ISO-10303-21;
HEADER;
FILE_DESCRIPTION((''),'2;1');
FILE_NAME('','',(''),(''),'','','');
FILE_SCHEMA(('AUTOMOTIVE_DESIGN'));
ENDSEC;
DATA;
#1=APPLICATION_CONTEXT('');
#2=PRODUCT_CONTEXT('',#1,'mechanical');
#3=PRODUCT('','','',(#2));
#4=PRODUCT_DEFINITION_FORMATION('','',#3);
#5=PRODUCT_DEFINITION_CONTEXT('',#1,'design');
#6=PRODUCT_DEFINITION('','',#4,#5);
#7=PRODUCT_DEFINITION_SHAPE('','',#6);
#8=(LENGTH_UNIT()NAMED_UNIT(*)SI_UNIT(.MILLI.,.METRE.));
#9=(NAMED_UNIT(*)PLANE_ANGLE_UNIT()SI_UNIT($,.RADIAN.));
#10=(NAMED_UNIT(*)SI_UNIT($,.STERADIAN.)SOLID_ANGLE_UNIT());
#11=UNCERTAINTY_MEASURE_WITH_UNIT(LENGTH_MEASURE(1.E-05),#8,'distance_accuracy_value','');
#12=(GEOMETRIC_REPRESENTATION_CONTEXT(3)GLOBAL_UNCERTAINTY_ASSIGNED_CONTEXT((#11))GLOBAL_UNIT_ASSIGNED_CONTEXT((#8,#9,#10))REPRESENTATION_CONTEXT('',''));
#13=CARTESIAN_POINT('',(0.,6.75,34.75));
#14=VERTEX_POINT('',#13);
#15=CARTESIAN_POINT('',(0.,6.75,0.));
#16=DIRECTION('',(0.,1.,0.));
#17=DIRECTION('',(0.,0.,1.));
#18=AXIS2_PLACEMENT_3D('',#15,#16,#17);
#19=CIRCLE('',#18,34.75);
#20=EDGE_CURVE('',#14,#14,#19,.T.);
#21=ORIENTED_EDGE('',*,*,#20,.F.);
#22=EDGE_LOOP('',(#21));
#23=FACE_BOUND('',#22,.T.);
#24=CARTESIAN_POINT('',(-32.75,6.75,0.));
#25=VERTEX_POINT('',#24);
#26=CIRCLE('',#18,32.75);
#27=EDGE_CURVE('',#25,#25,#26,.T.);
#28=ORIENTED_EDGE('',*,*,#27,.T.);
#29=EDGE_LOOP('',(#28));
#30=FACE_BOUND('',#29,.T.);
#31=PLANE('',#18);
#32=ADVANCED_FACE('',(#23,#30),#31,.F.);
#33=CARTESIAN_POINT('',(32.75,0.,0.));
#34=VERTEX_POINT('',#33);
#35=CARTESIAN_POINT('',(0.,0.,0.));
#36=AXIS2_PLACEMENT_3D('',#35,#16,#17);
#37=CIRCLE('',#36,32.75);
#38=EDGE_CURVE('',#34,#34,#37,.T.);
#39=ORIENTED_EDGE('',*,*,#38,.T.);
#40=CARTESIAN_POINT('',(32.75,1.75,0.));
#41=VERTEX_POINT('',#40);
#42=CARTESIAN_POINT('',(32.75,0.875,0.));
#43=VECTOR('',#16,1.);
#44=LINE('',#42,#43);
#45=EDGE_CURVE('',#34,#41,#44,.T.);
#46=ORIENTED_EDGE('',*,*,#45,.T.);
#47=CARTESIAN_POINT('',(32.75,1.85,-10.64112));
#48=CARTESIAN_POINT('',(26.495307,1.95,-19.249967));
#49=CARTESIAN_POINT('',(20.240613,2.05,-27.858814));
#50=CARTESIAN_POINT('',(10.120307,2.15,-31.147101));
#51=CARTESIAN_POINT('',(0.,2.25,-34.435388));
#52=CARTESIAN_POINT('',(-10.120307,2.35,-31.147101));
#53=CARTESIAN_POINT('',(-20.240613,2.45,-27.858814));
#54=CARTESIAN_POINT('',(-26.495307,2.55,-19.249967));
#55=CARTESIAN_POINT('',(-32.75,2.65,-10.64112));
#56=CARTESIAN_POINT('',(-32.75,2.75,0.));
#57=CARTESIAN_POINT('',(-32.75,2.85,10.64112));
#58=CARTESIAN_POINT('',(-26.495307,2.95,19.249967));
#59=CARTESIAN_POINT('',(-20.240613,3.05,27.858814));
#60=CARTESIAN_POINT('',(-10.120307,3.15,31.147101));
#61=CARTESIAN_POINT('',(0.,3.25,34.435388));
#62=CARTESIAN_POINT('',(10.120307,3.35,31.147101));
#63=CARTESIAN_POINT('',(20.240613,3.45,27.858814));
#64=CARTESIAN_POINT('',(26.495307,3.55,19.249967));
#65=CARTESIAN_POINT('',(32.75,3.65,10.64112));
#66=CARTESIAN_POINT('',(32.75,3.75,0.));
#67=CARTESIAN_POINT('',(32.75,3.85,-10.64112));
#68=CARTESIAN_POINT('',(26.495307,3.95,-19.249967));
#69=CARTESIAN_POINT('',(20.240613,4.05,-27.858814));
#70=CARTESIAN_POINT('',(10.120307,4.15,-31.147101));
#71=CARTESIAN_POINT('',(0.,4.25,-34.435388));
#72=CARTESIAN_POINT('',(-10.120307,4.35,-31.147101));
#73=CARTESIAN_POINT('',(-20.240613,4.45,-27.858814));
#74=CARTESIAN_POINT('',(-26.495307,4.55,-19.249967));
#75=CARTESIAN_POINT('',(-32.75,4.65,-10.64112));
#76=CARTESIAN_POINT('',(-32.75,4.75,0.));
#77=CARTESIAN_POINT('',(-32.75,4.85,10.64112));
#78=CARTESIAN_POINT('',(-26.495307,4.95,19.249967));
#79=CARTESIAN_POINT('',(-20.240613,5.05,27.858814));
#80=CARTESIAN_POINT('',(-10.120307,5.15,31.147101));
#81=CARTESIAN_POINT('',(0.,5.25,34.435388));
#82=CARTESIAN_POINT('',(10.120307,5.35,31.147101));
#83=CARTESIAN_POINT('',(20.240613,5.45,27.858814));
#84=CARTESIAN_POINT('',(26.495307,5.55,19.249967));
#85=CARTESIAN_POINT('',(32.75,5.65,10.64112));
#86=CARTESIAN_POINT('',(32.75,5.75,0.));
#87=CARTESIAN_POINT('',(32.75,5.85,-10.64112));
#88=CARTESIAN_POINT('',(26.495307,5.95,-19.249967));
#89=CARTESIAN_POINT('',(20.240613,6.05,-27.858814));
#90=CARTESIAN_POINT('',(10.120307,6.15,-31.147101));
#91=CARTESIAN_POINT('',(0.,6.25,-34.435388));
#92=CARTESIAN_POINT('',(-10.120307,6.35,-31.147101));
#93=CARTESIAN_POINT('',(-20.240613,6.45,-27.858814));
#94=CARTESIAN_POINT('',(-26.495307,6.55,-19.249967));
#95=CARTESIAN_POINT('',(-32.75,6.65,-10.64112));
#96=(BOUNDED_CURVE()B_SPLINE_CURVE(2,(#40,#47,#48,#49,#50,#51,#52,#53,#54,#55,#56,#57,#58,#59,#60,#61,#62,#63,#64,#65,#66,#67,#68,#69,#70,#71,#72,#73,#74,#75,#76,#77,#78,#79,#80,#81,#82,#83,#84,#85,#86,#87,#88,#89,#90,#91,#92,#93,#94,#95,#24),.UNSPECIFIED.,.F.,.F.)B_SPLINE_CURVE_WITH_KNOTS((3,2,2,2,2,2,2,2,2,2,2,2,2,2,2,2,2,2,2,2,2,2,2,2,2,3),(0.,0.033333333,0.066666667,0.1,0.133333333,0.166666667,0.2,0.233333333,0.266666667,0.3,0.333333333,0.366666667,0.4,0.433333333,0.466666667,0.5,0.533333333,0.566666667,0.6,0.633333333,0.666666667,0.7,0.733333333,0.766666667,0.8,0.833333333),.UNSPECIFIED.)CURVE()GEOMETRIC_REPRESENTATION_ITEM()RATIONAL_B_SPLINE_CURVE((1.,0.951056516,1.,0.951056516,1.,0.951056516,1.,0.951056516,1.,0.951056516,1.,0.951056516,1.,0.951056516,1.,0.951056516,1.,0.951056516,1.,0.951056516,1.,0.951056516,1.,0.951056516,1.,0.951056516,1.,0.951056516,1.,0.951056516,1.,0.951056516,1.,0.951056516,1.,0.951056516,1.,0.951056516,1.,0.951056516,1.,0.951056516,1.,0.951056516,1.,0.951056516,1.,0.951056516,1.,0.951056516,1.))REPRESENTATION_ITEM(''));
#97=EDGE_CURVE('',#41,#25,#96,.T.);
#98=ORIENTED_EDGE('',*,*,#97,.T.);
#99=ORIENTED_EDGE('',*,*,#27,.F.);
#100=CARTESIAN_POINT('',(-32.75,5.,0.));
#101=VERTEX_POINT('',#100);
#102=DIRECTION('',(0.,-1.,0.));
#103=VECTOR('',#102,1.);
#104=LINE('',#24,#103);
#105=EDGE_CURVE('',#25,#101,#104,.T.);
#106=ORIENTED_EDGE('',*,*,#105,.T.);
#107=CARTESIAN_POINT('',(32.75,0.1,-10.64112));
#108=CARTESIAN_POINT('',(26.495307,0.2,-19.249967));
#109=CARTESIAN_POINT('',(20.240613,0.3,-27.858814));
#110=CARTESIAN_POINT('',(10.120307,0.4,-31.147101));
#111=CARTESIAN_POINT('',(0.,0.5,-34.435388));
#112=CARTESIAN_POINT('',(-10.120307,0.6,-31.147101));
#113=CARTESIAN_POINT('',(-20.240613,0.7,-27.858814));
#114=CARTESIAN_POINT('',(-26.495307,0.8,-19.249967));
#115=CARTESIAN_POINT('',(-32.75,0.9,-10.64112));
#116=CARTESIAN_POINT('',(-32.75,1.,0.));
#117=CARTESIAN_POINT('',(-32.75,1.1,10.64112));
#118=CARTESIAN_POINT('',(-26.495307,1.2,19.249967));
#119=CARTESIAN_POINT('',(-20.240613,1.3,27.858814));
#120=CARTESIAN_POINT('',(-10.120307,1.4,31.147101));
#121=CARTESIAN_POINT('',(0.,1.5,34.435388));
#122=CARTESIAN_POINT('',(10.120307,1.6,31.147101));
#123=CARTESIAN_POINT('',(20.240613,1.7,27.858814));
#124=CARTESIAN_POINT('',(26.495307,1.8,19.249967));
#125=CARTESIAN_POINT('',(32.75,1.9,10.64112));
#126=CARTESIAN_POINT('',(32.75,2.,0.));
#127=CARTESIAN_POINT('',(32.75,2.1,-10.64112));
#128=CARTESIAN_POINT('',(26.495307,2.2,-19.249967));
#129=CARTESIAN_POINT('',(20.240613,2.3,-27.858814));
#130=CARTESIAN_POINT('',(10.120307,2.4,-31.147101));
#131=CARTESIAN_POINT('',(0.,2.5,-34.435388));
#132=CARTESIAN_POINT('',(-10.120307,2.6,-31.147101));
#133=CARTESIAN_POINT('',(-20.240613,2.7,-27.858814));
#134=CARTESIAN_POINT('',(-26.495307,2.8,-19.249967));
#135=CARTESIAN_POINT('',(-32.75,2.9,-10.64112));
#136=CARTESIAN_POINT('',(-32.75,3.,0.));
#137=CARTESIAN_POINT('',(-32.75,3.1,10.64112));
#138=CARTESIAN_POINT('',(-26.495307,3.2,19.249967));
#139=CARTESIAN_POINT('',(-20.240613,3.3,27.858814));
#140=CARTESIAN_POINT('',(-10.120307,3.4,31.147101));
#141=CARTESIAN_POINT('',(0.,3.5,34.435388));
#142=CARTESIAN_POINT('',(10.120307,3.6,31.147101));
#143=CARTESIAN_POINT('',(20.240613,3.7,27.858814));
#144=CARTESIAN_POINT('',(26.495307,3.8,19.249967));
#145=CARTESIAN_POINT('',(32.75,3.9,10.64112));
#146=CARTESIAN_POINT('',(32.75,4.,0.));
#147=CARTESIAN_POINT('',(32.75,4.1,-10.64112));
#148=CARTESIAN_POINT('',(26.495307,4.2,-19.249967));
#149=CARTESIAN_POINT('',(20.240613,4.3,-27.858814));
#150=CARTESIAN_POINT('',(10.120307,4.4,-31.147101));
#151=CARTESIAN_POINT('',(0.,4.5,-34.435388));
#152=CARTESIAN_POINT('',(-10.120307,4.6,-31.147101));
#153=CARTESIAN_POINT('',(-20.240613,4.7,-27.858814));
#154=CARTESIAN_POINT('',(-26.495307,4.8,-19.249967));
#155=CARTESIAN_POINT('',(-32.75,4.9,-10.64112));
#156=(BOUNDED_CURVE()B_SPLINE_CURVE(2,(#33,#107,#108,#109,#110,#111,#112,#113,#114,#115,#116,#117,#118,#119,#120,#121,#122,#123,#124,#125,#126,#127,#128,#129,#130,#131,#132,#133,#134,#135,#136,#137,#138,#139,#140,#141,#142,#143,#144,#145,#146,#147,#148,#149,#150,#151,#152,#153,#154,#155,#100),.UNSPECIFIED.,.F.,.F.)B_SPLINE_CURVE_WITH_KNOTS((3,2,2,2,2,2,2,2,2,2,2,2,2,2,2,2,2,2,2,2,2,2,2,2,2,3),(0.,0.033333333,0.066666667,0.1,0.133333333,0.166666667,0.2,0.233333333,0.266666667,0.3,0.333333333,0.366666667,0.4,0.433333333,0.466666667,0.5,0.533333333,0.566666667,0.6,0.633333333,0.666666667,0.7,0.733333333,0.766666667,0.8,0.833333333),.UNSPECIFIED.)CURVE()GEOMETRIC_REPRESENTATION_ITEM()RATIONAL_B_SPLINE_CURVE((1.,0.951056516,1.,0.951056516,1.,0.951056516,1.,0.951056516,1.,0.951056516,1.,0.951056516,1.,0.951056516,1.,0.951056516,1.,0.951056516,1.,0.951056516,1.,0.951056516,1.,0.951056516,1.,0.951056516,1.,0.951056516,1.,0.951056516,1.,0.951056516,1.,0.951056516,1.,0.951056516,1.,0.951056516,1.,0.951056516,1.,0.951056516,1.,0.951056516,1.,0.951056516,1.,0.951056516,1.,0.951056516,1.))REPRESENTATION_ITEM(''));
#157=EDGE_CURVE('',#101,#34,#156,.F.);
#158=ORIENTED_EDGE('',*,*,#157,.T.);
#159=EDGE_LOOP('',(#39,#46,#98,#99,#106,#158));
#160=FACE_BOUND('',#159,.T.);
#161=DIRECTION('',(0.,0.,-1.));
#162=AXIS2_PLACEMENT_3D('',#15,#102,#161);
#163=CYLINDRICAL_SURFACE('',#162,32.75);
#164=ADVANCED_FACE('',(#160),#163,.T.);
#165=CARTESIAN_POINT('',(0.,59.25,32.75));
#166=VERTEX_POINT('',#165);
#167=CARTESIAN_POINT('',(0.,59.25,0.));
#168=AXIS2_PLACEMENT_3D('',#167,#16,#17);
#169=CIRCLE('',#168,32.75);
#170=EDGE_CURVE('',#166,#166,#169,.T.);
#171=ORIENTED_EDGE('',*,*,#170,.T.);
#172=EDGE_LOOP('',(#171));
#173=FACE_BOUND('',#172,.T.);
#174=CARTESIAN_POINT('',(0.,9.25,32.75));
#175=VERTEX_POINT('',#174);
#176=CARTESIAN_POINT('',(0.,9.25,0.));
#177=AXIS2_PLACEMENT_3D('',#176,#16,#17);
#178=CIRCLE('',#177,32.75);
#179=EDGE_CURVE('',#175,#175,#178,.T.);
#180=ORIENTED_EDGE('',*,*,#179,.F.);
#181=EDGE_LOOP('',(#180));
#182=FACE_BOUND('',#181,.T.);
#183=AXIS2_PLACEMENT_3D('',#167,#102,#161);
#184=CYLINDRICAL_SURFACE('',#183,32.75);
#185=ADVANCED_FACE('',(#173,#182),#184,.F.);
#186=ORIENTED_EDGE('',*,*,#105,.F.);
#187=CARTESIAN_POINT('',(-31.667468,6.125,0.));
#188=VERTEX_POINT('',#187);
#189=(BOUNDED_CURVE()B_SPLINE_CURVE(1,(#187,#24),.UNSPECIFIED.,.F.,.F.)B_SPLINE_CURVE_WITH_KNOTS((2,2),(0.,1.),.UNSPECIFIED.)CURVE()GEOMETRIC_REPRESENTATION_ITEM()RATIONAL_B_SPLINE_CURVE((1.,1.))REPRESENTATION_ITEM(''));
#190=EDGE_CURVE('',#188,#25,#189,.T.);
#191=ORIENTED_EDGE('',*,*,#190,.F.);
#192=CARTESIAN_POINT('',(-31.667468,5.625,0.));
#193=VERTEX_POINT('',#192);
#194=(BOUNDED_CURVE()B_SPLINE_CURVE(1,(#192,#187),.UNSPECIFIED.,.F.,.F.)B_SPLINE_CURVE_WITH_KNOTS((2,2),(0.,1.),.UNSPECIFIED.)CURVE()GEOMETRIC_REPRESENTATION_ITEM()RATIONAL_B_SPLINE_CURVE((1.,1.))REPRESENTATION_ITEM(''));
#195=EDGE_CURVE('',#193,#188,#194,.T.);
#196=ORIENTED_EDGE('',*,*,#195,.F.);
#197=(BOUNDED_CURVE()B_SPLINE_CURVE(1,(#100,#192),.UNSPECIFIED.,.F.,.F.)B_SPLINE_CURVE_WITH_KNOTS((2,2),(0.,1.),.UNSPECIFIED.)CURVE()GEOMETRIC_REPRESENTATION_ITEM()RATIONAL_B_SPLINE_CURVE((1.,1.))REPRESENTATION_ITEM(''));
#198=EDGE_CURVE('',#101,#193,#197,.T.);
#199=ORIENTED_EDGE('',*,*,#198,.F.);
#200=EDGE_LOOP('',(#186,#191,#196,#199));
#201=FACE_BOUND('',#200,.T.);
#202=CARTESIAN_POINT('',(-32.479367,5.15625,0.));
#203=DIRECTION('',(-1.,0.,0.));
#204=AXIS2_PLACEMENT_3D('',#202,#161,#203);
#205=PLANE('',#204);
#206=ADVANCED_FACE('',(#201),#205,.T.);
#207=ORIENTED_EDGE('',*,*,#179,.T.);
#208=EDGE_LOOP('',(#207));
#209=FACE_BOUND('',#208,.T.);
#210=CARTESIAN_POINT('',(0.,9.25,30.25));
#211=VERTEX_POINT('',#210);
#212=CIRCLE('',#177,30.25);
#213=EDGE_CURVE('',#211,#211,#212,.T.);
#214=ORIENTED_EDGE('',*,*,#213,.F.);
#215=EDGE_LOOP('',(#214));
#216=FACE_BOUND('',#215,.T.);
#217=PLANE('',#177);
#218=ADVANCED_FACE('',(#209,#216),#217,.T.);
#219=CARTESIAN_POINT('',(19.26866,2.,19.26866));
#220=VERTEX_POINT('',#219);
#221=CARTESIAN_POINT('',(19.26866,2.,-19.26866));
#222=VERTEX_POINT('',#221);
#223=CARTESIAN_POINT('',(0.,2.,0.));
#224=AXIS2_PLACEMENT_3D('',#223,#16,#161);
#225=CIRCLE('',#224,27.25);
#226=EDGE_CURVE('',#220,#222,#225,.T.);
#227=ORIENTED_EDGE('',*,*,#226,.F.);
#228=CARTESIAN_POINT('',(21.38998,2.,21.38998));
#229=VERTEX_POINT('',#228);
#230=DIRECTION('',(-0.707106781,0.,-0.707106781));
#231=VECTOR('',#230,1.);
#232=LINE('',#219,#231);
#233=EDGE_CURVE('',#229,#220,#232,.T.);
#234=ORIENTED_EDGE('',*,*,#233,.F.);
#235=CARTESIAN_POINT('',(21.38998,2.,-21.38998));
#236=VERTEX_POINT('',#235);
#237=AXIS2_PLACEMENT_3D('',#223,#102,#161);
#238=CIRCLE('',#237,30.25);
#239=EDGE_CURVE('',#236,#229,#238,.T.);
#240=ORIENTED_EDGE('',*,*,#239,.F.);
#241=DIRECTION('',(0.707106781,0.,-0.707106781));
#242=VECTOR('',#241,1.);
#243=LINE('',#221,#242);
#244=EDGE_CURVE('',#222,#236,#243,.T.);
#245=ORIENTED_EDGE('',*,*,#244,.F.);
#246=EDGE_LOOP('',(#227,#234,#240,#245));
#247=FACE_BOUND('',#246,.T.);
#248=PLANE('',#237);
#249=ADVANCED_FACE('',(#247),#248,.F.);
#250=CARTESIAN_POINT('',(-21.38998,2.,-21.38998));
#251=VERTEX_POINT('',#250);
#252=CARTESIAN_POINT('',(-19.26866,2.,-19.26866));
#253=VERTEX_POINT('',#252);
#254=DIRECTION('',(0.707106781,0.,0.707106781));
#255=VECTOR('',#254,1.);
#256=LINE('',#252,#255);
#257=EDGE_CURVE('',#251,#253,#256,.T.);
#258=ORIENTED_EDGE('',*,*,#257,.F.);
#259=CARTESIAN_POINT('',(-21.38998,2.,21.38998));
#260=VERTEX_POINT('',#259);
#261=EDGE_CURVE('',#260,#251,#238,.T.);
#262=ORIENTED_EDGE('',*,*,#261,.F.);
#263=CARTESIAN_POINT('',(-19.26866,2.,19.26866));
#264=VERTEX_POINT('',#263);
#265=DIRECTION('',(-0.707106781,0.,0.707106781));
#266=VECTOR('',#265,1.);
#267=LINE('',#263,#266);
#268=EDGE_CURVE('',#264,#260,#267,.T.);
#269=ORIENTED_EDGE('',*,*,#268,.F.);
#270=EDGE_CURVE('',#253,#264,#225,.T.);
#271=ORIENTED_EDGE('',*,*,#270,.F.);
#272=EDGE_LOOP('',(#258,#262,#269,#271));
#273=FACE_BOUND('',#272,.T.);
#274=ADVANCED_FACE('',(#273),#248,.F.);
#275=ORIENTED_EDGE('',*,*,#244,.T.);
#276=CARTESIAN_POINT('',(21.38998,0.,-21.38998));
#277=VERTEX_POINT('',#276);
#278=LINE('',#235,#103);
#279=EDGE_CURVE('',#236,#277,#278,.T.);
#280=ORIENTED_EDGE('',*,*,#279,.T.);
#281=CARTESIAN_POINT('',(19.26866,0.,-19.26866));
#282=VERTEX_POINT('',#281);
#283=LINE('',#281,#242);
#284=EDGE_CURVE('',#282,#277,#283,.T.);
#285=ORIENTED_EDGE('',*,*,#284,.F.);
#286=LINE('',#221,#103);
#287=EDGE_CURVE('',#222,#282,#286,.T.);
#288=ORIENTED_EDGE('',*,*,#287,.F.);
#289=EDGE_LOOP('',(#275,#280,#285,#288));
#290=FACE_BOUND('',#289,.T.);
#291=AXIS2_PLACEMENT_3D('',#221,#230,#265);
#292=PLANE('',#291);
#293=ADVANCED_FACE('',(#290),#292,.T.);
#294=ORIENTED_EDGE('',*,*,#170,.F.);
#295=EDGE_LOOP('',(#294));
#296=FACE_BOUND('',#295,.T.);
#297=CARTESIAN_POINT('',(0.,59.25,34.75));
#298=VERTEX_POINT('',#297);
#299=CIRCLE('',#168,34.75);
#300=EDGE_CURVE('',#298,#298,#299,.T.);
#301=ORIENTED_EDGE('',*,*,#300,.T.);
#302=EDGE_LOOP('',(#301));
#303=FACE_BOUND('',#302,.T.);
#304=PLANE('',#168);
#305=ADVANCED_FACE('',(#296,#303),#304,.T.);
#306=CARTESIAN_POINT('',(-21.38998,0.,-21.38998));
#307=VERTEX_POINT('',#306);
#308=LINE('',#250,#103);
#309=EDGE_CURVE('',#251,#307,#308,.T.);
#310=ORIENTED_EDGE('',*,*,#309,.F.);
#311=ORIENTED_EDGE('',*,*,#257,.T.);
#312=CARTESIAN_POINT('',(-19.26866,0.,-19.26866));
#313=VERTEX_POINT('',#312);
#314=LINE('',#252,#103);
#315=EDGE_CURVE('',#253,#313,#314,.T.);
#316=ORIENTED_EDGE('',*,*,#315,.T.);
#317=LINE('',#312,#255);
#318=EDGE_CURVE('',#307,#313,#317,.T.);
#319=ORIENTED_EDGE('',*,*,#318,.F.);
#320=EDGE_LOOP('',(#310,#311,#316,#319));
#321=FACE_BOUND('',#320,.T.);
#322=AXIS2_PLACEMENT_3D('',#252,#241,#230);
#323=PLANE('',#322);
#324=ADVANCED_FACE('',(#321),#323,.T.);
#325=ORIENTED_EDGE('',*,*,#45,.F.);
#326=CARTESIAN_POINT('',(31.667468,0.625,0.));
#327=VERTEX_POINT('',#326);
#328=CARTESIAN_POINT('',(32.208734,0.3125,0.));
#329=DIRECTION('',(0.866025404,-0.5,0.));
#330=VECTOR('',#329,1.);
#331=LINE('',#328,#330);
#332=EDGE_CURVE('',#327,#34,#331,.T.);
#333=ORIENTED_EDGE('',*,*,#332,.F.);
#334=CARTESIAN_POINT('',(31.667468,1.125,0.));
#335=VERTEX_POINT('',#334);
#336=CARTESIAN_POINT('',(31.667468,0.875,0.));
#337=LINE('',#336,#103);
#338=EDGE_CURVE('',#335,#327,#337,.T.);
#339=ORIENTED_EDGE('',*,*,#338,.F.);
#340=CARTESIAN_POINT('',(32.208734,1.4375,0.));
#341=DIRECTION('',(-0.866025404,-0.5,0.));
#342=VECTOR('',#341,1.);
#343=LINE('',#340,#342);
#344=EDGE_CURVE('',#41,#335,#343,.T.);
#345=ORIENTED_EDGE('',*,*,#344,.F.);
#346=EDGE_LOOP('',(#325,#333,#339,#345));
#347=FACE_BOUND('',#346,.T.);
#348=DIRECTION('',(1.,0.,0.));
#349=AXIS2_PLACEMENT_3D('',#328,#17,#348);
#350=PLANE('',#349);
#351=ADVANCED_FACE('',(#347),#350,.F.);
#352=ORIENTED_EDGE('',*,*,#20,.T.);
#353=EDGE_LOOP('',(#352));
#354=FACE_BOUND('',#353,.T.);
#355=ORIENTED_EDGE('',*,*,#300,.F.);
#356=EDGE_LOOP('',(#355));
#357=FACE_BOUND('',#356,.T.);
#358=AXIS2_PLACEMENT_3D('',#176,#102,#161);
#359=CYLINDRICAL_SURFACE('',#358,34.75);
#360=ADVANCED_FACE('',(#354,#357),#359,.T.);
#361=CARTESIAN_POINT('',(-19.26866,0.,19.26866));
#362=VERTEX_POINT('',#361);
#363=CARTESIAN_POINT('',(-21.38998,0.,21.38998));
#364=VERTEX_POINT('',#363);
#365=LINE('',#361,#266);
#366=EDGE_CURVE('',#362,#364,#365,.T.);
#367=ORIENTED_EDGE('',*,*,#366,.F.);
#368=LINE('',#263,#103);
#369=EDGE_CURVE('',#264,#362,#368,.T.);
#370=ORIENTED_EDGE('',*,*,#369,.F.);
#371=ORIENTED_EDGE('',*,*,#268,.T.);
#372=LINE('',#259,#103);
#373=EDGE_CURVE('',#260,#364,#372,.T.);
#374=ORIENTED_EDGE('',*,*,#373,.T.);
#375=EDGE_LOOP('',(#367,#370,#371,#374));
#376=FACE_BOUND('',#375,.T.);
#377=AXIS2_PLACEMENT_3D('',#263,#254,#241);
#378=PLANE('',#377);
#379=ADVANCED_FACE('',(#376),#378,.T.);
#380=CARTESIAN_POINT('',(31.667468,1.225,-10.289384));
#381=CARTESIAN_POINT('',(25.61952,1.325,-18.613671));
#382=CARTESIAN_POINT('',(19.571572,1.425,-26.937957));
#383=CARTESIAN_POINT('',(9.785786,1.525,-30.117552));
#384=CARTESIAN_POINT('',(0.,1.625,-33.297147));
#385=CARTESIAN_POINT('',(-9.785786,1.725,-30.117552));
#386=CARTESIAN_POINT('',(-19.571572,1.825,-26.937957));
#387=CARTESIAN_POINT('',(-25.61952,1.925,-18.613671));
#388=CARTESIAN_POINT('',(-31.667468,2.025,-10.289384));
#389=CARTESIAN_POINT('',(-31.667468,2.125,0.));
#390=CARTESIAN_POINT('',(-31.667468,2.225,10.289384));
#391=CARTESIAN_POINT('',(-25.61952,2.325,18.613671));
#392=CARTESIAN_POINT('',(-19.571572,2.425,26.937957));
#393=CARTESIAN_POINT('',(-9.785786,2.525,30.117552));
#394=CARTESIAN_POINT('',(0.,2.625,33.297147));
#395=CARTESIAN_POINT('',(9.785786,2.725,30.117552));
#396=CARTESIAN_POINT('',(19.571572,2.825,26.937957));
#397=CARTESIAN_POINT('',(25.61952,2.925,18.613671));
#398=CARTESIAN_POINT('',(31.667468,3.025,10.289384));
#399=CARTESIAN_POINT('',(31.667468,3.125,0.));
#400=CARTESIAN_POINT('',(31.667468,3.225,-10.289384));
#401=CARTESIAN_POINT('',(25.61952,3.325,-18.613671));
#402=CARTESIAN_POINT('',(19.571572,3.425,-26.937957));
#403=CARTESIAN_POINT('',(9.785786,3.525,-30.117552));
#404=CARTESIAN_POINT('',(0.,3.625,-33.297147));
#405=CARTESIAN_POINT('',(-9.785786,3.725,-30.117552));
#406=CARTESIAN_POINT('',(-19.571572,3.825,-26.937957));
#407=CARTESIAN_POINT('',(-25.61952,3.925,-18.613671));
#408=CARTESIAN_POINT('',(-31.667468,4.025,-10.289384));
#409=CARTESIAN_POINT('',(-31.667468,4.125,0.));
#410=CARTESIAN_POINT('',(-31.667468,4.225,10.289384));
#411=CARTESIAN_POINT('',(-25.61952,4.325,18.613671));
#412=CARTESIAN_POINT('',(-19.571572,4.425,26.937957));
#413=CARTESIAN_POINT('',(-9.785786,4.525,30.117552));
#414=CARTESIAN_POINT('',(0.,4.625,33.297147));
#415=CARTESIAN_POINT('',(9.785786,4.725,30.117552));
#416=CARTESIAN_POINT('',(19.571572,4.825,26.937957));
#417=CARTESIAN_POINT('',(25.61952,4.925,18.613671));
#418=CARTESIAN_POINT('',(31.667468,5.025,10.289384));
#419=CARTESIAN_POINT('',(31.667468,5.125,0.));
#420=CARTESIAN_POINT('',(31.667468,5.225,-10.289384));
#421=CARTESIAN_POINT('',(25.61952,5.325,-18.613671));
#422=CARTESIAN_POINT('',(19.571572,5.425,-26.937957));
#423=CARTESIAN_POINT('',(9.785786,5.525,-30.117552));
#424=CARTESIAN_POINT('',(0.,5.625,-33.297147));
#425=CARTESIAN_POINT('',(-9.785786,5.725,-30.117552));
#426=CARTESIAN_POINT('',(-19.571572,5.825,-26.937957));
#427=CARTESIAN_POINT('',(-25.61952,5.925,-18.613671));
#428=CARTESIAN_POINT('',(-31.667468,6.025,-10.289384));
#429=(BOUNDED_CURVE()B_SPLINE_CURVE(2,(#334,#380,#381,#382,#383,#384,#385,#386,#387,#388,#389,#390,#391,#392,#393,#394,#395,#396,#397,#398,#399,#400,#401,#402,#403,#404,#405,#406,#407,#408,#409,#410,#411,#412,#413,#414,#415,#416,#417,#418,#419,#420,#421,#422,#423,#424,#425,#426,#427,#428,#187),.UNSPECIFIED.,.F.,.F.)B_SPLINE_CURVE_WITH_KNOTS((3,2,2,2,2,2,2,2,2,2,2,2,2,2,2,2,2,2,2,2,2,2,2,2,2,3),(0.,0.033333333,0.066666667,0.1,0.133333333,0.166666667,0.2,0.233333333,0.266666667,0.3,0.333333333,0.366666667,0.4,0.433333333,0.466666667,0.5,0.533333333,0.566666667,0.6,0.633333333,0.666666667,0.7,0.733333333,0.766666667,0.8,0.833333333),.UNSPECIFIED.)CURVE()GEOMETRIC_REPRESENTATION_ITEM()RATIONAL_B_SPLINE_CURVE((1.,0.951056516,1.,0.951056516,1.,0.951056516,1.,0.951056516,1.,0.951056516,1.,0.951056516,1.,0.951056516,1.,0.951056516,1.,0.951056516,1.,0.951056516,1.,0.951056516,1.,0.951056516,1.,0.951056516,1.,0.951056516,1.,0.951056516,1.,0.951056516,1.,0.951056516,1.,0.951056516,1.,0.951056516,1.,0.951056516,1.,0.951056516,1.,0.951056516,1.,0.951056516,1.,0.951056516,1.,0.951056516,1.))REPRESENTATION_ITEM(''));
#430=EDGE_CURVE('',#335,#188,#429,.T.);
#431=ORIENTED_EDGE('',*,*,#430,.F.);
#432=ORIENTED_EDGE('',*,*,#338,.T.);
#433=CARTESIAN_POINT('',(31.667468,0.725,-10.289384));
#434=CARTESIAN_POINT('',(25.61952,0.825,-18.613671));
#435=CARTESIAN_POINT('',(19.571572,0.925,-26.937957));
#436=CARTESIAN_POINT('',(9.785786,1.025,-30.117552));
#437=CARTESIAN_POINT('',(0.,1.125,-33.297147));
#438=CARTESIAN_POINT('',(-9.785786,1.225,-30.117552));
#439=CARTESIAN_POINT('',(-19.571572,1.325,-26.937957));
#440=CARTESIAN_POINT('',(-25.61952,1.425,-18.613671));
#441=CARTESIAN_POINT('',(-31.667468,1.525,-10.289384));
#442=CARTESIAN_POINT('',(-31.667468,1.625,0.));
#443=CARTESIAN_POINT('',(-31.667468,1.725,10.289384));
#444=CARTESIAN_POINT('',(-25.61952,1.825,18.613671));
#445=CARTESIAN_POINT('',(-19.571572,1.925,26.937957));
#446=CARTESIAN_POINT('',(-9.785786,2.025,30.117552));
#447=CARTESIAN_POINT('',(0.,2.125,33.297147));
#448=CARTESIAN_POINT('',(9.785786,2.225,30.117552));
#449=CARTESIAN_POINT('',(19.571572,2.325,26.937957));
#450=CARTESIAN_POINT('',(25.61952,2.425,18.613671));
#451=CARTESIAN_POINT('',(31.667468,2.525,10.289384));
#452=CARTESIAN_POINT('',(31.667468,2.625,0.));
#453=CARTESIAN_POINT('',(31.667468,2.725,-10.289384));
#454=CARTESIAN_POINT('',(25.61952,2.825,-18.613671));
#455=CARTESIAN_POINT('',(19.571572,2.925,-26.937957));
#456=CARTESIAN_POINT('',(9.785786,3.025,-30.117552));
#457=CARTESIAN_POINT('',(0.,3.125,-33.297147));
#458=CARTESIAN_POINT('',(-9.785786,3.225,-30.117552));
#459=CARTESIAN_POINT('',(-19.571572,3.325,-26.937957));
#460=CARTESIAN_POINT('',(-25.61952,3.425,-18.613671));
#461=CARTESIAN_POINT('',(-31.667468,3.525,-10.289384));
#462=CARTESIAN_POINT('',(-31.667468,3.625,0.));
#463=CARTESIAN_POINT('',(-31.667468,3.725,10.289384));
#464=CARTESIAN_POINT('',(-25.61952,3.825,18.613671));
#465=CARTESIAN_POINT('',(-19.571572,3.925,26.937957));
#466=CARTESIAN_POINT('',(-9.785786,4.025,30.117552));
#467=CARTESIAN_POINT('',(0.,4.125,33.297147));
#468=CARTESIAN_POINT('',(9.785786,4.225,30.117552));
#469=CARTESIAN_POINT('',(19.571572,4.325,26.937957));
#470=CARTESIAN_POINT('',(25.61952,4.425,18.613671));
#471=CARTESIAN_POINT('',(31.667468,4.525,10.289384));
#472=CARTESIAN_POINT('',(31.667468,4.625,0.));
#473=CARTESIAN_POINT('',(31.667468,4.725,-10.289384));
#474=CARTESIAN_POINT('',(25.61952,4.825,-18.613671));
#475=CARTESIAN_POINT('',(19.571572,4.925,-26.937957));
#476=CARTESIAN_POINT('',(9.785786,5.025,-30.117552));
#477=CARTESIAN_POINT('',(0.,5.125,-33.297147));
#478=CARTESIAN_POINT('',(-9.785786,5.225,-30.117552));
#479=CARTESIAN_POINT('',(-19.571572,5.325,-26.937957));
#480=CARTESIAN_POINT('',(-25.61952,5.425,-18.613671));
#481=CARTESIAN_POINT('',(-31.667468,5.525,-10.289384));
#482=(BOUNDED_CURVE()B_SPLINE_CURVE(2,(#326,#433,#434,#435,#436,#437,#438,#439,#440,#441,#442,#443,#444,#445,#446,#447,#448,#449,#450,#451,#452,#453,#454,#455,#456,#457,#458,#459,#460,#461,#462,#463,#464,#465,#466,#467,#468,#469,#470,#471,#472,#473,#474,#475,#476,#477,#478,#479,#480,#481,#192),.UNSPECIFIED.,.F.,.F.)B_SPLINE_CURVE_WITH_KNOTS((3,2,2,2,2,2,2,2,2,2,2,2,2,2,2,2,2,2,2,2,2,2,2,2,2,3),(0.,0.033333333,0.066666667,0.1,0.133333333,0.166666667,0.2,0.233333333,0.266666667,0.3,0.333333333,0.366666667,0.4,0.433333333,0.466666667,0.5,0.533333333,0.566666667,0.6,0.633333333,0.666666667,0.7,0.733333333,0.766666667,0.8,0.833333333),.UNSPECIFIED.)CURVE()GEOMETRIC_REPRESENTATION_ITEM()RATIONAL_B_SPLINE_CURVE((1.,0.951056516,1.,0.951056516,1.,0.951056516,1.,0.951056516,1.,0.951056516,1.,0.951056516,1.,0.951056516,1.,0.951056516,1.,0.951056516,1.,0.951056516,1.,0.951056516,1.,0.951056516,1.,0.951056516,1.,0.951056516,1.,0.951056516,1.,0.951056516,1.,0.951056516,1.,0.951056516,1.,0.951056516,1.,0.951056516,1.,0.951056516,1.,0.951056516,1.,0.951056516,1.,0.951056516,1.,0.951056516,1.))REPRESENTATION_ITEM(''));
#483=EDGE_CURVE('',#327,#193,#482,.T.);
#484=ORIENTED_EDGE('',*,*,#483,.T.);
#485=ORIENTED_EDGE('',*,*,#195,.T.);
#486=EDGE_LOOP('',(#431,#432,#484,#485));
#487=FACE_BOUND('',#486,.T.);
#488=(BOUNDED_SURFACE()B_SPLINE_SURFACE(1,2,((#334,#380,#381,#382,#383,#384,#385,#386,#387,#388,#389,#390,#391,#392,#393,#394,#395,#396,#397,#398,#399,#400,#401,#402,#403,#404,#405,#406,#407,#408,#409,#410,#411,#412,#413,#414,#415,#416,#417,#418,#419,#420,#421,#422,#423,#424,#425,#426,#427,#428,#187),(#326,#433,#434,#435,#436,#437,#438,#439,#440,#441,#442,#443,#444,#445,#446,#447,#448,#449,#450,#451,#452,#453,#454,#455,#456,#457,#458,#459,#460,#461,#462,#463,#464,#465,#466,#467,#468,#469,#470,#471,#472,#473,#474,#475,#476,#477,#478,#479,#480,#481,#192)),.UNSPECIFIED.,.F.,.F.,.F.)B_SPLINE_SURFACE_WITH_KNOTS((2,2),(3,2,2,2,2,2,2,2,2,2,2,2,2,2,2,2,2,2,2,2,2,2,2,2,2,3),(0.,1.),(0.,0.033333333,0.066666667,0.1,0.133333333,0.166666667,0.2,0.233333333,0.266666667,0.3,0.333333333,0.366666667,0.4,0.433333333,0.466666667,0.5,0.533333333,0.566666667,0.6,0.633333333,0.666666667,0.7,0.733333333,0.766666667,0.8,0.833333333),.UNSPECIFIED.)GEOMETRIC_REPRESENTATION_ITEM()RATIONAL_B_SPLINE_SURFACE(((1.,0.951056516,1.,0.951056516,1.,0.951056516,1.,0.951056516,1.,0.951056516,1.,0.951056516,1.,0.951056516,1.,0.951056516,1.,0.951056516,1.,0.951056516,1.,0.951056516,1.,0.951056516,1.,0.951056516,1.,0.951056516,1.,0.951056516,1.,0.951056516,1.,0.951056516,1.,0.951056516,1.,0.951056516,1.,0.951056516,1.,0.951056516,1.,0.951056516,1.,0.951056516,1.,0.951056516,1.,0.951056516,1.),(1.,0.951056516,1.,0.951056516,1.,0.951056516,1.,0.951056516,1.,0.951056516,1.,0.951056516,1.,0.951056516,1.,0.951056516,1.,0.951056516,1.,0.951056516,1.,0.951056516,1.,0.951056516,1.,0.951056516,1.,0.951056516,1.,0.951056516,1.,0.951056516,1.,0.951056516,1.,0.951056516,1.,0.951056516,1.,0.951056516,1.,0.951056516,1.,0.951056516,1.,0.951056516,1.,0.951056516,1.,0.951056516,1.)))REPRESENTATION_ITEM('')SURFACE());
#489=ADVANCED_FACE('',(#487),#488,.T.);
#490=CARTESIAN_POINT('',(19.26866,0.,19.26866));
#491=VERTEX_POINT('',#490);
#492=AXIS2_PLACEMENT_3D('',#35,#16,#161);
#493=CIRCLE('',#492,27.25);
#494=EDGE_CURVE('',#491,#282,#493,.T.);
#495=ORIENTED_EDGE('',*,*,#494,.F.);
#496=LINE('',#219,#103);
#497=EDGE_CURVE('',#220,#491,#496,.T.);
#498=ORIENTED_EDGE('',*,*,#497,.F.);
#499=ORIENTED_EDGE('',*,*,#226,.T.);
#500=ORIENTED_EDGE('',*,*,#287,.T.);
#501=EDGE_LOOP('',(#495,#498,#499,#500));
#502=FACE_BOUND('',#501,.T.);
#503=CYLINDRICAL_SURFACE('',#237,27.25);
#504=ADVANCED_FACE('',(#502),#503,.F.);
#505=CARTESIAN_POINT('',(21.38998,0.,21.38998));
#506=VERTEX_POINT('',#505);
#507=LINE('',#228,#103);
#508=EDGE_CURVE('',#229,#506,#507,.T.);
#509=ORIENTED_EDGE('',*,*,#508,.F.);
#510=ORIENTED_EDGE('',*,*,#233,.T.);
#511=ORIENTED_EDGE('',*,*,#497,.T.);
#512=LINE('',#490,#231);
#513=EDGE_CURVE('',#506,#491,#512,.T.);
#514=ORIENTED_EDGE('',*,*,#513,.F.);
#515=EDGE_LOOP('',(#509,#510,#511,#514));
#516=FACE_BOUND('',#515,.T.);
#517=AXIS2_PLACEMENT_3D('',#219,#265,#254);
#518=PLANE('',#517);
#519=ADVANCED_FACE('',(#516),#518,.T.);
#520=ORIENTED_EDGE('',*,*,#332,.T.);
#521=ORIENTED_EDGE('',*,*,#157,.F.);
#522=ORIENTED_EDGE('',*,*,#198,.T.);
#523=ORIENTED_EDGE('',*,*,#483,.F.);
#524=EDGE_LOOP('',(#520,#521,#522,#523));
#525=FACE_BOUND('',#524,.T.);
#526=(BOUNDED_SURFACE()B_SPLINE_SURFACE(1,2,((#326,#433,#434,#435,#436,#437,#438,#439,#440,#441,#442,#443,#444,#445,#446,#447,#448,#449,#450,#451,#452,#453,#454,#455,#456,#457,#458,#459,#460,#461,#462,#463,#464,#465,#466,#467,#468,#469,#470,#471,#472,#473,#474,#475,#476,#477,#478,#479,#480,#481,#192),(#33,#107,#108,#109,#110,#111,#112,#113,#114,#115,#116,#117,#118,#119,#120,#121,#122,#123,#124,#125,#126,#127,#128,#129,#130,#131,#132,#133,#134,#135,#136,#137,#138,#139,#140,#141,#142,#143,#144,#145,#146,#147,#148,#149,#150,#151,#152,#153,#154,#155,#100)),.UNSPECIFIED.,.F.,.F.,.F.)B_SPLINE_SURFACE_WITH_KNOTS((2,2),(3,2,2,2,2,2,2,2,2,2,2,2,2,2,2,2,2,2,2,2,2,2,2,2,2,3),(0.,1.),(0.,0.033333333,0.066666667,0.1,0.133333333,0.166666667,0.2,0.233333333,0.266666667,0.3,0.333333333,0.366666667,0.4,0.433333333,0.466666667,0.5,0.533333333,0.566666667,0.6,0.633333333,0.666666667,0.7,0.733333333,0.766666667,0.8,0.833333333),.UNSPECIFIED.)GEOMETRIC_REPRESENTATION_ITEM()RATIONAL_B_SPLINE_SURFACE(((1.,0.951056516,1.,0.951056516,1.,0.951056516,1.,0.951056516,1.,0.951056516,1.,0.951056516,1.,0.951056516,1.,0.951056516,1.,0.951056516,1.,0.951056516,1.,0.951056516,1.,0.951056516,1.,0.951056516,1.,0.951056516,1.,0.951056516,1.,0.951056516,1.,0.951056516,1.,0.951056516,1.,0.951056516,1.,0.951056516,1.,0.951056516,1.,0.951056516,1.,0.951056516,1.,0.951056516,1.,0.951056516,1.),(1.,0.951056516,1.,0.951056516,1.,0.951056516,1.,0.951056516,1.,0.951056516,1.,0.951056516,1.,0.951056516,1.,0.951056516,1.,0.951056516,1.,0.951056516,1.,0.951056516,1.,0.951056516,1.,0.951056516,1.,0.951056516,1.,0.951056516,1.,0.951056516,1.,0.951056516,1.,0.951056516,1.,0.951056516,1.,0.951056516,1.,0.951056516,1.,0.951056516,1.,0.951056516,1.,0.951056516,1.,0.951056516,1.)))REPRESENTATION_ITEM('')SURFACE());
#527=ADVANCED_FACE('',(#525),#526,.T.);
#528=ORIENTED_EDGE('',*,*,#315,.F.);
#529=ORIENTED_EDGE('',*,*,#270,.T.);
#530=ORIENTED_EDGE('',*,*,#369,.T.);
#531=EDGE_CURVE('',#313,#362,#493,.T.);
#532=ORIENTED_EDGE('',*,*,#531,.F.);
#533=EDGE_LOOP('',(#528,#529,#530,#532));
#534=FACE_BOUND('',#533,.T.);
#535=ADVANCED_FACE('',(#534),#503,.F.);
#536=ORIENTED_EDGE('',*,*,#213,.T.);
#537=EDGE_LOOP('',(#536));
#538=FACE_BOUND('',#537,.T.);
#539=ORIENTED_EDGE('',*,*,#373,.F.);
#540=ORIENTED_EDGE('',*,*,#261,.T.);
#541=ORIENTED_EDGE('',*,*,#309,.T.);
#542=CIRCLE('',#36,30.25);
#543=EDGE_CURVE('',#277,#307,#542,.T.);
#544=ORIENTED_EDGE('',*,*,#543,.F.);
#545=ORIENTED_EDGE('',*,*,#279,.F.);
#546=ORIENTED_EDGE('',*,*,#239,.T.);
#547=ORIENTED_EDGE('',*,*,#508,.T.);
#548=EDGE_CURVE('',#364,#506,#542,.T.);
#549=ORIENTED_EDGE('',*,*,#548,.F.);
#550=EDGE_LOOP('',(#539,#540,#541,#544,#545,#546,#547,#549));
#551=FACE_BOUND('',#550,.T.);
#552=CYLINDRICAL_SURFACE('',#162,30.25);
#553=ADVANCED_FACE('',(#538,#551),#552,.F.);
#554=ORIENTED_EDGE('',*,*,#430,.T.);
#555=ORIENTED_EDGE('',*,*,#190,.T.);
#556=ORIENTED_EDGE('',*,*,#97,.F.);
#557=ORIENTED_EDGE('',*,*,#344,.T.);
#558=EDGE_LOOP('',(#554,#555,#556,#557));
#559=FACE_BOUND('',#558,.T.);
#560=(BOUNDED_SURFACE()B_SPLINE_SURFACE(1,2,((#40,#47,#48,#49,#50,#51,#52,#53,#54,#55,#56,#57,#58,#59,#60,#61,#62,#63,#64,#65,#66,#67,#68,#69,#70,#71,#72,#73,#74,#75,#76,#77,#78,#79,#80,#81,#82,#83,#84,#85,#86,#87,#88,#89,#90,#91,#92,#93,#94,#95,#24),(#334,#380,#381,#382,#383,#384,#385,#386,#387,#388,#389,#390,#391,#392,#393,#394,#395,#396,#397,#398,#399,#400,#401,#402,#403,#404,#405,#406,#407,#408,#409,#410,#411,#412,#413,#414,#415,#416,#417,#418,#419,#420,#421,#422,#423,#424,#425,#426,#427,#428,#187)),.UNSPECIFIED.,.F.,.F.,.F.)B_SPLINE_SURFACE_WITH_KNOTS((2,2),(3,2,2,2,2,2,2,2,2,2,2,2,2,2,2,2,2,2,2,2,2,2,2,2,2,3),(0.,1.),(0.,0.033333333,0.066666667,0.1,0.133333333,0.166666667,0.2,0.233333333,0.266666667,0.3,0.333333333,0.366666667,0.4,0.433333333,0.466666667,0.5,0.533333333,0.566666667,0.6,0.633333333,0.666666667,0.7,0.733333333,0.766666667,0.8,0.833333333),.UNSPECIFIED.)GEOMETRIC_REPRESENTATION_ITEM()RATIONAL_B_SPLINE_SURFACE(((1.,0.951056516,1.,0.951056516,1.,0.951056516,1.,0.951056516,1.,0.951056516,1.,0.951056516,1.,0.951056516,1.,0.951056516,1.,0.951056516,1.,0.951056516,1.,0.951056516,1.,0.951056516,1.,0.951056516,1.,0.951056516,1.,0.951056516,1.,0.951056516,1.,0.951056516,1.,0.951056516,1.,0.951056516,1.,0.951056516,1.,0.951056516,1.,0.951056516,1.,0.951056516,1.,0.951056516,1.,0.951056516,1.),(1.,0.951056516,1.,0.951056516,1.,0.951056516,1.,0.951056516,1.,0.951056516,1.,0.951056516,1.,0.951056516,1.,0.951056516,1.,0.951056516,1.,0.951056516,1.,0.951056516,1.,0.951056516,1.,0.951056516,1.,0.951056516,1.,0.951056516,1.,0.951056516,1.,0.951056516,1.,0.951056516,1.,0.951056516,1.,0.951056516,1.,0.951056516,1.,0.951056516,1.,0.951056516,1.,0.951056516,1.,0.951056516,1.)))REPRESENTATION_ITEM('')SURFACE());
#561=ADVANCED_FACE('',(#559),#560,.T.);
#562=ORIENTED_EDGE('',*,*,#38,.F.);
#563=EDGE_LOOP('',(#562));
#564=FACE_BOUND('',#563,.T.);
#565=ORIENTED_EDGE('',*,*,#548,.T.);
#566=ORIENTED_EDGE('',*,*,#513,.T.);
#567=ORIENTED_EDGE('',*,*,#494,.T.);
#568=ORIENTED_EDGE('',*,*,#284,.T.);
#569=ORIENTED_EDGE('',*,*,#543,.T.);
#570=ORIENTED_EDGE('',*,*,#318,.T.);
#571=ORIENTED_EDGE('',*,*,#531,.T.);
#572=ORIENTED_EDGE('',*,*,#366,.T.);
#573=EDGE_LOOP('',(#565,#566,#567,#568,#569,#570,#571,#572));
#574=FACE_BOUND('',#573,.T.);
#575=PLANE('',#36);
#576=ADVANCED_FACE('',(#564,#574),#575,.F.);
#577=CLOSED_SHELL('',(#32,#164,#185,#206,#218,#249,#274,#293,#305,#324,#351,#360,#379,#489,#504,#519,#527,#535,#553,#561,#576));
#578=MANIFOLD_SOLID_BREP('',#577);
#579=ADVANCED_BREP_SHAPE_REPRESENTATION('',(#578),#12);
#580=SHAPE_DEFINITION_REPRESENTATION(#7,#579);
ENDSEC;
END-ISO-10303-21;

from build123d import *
from build123d.topology import SkipClean

# Parameters (mm, degrees)
SKETCH1_R           = 32.75
SKETCH1_R_2         = 30.25
BOSS_EXTRUDE1_DEPTH = 6.75
SKETCH2_R           = 34.75
SKETCH2_R_2         = 30.25
BOSS_EXTRUDE2_DEPTH = 2.5
THREAD1_PITCH       = 2
BOSS_EXTRUDE3_DEPTH = 2
SKETCH5_R           = 34.75
SKETCH5_R_2         = 32.75
BOSS_EXTRUDE4_DEPTH = 50


with BuildPart() as part:
    # Sketch1 → Boss-Extrude1 (new body)
    with BuildSketch(Plane(origin=(0, 0, 0), x_dir=(1, 0, 0), z_dir=(0, 1, 0))):
        with Locations(Location((0, 0, 0), (0, 0, 270))):
            Circle(SKETCH1_R)
        with Locations(Location((0, 0, 0), (0, 0, 270))):
            Circle(SKETCH1_R_2, mode=Mode.SUBTRACT)
    extrude(amount=BOSS_EXTRUDE1_DEPTH)

    # Sketch2 → Boss-Extrude2 (add)
    with BuildSketch(Plane(origin=(0, 6.75, 0), x_dir=(1, 0, 0), z_dir=(0, 1, 0))):
        with Locations(Location((0, 0, 0), (0, 0, 270))):
            Circle(SKETCH2_R)
        with Locations(Location((0, 0, 0), (0, 0, 270))):
            Circle(SKETCH2_R_2, mode=Mode.SUBTRACT)
    extrude(amount=BOSS_EXTRUDE2_DEPTH)

    # Thread1: the profile of Thread Profile1 profile screwed along a right-hand helix of 2.5 turns, 10 arcs to a turn; built about Z, then put on its axis
    with SkipClean():  # the faces are left unmerged after this step: merging them gives an invalid solid
        thread1_z = Axis((0, 0, 0), (0, 0, 1))
        thread1_corners = [(32.7503, 0, -0.000173205), (32.7503, 0, 1.7501732), (31.66746825, 0, 1.124999997), (31.66746825, 0, 0.624999997)]
        with BuildLine(mode=Mode.PRIVATE) as thread1_profile:
            Line(thread1_corners[0], thread1_corners[1])
            Line(thread1_corners[1], thread1_corners[2])
            Line(thread1_corners[2], thread1_corners[3])
            Line(thread1_corners[3], thread1_corners[0])
        thread1_cap = Face(thread1_profile.wire())
        thread1_turn_angles = [0, 18, 36, 54, 72, 90, 108, 126, 144, 162, 180, 198, 216, 234, 252, 270, 288, 306, 324, 342, 360]
        thread1_turn_weights = [1, 0.9510565162951535, 1, 0.9510565162951535, 1, 0.9510565162951535, 1, 0.9510565162951535, 1, 0.9510565162951535, 1, 0.9510565162951535, 1, 0.9510565162951535, 1, 0.9510565162951535, 1, 0.9510565162951535, 1, 0.9510565162951535, 1]
        thread1_turn_rails = [Edge.make_bspline([Vector(p[0], p[1], 0).rotate(thread1_z, thread1_turn_angles[k]) / thread1_turn_weights[k] + Vector(0, 0, p[2] + THREAD1_PITCH * thread1_turn_angles[k] / 360) for k in range(21)], [0, 0, 0, 1, 1, 2, 2, 3, 3, 4, 4, 5, 5, 6, 6, 7, 7, 8, 8, 9, 9, 10, 10, 10], 2, thread1_turn_weights) for p in thread1_corners]
        thread1_turn_sides = [Face.make_surface_from_curves(thread1_turn_rails[p[0]], thread1_turn_rails[p[1]]) for p in [(0, 1), (1, 2), (2, 3), (3, 0)]]
        thread1_last_angles = [720, 738, 756, 774, 792, 810, 828, 846, 864, 882, 900]
        thread1_last_weights = [1, 0.9510565162951535, 1, 0.9510565162951535, 1, 0.9510565162951535, 1, 0.9510565162951535, 1, 0.9510565162951535, 1]
        thread1_last_rails = [Edge.make_bspline([Vector(p[0], p[1], 0).rotate(thread1_z, thread1_last_angles[k]) / thread1_last_weights[k] + Vector(0, 0, p[2] + THREAD1_PITCH * thread1_last_angles[k] / 360) for k in range(11)], [0, 0, 0, 1, 1, 2, 2, 3, 3, 4, 4, 5, 5, 5], 2, thread1_last_weights) for p in thread1_corners]
        thread1_last_sides = [Face.make_surface_from_curves(thread1_last_rails[p[0]], thread1_last_rails[p[1]]) for p in [(0, 1), (1, 2), (2, 3), (3, 0)]]
        thread1 = Plane(origin=(0, 0, 0), x_dir=(1, 0, 0), z_dir=(0, 1, 0)) * Solid(Shell([*[p.moved(Location((0, 0, THREAD1_PITCH * i))) for i in range(2) for p in thread1_turn_sides], *thread1_last_sides, thread1_cap, thread1_cap.rotate(thread1_z, 900).moved(Location((0, 0, THREAD1_PITCH * 900 / 360)))]))
        add(thread1, mode=Mode.SUBTRACT)

    # Sketch3 → Boss-Extrude3 (add)
    with SkipClean():  # the faces are left unmerged after this step: merging them gives an invalid solid
        with BuildSketch(Plane.XZ):
            with BuildLine():
                Line((19.268659787, 19.268659787), (21.389980131, 21.389980131))
                ThreePointArc((21.389980131, 21.389980131), (30.25, 0), (21.389980131, -21.389980131))
                Line((21.389980131, -21.389980131), (19.268659787, -19.268659787))
                ThreePointArc((19.268659787, -19.268659787), (27.25, 0), (19.268659787, 19.268659787))
            make_face()
            with BuildLine():
                Line((-19.268659787, 19.268659787), (-21.389980131, 21.389980131))
                ThreePointArc((-21.389980131, 21.389980131), (-30.25, 0), (-21.389980131, -21.389980131))
                Line((-21.389980131, -21.389980131), (-19.268659787, -19.268659787))
                ThreePointArc((-19.268659787, -19.268659787), (-27.25, 0), (-19.268659787, 19.268659787))
            make_face()
        extrude(amount=-BOSS_EXTRUDE3_DEPTH)

    # Sketch5 → Boss-Extrude4 (add)
    with SkipClean():  # the faces are left unmerged after this step: merging them gives an invalid solid
        with BuildSketch(Plane(origin=(0, 9.25, 0), x_dir=(1, 0, 0), z_dir=(0, 1, 0))):
            with Locations(Location((0, 0, 0), (0, 0, 270))):
                Circle(SKETCH5_R)
            with Locations(Location((0, 0, 0), (0, 0, 270))):
                Circle(SKETCH5_R_2, mode=Mode.SUBTRACT)
        extrude(amount=BOSS_EXTRUDE4_DEPTH)


solid = part.part
